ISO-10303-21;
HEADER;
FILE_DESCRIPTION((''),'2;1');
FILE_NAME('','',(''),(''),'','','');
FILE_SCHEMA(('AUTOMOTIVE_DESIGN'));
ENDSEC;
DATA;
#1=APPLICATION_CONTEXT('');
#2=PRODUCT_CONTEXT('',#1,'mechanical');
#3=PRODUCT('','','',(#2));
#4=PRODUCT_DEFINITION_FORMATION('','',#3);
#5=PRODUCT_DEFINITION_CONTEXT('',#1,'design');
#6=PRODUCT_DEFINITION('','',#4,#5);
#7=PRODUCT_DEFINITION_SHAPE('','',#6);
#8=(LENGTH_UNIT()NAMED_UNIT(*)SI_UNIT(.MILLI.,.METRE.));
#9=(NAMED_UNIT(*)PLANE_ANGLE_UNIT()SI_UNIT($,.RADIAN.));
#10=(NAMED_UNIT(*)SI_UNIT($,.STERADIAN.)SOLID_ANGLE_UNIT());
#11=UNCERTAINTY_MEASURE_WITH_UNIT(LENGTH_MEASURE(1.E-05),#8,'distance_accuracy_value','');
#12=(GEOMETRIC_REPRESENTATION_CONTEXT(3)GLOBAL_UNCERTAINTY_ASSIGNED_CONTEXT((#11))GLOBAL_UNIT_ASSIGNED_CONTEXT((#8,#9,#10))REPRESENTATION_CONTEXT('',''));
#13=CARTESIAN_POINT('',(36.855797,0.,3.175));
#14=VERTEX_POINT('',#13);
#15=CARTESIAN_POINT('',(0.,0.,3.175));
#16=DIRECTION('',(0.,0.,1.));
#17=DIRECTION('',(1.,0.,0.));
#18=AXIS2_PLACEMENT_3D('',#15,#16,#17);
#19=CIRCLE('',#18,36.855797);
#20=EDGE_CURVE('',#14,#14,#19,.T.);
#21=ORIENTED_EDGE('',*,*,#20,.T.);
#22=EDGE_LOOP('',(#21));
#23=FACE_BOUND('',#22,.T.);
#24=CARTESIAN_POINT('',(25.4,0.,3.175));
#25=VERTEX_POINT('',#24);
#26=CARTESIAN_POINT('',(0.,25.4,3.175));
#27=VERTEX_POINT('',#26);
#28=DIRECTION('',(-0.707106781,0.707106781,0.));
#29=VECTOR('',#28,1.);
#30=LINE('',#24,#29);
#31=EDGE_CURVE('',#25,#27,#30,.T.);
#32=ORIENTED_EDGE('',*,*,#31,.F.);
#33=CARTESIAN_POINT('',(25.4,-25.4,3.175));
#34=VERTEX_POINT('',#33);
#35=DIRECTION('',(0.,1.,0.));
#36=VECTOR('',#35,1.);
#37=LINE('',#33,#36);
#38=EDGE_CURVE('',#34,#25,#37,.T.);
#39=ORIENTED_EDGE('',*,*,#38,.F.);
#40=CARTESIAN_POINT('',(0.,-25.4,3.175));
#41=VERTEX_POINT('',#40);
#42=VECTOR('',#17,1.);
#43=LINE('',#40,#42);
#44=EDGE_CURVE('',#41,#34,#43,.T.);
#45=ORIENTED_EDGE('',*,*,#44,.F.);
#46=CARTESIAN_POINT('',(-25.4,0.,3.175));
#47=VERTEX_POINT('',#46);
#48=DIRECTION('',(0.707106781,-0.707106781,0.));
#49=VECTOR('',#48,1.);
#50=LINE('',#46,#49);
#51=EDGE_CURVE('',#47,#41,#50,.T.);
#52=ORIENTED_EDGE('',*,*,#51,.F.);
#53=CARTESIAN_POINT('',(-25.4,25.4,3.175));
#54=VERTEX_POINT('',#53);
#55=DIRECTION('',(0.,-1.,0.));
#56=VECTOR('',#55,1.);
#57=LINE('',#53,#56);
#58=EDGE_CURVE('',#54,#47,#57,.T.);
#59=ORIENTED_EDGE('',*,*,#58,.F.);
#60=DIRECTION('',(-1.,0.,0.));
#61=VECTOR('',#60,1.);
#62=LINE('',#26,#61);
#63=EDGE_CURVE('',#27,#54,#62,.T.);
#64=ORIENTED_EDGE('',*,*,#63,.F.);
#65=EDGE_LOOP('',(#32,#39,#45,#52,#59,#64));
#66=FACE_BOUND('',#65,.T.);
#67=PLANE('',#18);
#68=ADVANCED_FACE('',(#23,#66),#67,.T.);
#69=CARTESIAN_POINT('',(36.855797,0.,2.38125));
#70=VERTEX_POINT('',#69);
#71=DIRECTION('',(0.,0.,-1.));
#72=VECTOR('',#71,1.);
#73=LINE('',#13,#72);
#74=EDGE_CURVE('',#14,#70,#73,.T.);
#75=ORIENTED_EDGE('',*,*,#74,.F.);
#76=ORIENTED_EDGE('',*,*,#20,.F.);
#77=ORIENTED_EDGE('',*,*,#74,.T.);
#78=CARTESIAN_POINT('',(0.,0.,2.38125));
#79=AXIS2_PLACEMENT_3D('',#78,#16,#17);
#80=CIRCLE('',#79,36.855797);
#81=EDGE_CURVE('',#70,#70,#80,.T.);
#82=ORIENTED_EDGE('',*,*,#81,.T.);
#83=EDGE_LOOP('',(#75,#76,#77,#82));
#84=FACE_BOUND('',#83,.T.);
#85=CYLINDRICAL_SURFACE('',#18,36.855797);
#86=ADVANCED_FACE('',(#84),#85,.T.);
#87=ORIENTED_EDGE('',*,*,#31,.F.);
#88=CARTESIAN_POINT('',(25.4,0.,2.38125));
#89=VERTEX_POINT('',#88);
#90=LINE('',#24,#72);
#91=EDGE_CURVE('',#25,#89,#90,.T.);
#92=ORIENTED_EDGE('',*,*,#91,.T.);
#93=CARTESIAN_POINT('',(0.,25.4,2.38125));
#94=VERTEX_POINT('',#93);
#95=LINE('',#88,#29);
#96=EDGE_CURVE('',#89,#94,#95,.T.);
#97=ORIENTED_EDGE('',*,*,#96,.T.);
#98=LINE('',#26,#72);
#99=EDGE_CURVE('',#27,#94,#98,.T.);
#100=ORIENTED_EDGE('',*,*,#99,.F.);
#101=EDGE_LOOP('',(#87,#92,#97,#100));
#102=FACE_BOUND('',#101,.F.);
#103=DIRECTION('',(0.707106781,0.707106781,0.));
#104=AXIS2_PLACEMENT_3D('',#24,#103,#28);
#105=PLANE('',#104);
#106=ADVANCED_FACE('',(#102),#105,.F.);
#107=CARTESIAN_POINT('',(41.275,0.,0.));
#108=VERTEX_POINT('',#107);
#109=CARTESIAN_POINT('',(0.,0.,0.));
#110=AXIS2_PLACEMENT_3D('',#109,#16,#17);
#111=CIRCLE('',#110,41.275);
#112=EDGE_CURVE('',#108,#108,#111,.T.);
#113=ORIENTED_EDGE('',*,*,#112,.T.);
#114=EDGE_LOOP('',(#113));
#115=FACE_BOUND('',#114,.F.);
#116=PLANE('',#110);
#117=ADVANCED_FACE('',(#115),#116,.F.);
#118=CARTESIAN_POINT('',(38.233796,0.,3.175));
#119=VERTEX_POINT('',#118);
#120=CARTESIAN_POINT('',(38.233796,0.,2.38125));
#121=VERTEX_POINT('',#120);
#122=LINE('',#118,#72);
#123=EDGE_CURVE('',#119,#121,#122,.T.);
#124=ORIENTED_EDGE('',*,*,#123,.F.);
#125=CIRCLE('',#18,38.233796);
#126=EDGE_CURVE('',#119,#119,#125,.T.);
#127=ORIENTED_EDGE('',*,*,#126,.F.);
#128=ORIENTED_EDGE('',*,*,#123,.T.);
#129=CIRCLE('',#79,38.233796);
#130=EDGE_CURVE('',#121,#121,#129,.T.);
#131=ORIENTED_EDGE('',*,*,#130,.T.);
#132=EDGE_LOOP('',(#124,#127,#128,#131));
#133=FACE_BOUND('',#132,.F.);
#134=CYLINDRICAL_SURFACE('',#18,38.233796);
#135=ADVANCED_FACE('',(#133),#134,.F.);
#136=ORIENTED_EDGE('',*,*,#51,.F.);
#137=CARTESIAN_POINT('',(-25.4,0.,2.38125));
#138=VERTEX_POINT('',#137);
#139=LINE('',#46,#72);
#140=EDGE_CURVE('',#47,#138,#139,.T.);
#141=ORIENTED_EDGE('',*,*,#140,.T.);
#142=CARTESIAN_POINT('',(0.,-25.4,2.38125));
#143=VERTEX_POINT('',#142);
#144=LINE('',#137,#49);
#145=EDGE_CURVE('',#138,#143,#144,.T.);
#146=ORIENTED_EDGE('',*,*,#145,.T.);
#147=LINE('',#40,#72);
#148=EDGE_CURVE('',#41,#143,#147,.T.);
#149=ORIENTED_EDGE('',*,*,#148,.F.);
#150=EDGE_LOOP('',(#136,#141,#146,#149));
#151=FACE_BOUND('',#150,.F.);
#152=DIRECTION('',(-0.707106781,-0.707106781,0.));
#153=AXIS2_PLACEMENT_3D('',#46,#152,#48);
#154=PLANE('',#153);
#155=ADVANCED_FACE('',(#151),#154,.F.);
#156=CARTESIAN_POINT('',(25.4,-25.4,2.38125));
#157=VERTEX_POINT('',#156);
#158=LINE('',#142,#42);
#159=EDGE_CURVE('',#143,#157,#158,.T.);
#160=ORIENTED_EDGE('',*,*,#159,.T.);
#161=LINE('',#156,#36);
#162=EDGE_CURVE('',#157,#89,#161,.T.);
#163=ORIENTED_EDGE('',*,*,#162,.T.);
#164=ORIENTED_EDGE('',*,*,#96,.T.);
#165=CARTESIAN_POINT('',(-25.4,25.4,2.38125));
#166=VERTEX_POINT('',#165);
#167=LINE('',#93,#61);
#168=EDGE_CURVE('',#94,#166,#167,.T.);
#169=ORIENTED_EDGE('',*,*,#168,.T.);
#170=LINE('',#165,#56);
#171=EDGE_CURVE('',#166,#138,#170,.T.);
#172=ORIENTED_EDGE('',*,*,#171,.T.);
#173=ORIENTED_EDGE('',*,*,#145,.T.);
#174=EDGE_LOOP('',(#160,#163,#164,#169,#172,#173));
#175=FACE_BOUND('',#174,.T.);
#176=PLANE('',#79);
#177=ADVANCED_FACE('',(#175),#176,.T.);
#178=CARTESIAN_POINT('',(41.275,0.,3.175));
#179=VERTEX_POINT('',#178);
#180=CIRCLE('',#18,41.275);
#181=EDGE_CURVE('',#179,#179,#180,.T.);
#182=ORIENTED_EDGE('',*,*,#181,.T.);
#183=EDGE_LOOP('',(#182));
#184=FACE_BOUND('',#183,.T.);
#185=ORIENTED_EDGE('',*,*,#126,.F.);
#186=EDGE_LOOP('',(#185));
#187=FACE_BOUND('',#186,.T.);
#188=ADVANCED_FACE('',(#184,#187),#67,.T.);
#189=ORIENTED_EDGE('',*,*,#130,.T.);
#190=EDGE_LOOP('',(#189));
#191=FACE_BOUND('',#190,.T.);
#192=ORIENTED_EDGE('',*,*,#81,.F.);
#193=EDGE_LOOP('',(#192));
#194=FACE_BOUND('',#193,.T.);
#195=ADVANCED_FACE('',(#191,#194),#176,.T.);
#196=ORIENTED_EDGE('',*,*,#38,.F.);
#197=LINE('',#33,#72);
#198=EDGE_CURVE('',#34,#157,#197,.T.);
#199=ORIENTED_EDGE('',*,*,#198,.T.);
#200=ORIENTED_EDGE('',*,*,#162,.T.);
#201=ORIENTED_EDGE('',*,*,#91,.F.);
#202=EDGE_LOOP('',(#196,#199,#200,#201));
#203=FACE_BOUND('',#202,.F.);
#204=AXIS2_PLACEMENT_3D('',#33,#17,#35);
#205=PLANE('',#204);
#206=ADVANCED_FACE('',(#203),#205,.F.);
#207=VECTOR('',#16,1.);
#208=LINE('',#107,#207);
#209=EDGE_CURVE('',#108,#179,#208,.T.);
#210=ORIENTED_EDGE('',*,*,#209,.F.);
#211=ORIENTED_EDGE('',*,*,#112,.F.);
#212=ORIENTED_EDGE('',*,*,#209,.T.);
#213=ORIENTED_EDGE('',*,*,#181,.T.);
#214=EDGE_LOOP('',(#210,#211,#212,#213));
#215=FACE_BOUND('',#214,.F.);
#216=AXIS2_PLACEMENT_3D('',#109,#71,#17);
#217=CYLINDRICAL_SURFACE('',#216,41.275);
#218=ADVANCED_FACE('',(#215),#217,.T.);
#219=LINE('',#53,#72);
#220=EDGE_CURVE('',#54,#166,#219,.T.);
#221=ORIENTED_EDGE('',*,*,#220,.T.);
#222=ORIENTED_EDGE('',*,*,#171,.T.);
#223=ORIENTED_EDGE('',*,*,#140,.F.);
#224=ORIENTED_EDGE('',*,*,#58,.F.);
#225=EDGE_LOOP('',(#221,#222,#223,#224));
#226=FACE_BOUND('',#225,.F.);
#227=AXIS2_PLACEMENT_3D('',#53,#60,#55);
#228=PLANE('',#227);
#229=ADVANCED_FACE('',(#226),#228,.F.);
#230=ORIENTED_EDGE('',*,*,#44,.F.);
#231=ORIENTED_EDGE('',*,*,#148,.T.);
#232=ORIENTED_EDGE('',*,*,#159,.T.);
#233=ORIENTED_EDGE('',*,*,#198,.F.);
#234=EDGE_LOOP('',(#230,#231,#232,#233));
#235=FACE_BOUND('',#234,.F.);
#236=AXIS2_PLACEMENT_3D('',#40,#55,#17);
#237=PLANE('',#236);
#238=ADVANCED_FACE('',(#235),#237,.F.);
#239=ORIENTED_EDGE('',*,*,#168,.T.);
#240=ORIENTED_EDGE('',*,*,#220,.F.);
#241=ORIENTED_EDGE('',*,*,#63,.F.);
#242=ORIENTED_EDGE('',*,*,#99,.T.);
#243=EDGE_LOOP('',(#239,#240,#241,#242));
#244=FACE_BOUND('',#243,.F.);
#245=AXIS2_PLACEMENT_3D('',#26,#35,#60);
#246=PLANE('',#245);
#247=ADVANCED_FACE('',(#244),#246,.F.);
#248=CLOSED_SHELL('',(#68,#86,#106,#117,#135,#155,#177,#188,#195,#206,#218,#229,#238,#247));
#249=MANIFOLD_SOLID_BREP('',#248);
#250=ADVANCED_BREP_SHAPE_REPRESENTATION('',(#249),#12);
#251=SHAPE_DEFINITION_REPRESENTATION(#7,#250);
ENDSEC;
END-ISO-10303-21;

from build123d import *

# Parameters (mm, degrees)
F0_R     = 41.275
F1_DEPTH = 3.175
F2_R     = 38.2337964231
F2_R_2   = 36.8557965157
F3_DEPTH = 0.79375
F5_DEPTH = 0.79375


# Not quite as in the source:
# - a length typed as a fraction of an inch, garbled in the dataset ("3 / 203.2 mm" for 3/8 in), is restored


with BuildPart() as f1:
    # F0 (on Top) → F1 (new body)
    with BuildSketch(Plane.XY):
        Circle(F0_R)
    extrude(amount=F1_DEPTH)

    # F2 (on face) → F3 (cut)
    with BuildSketch(Plane.XY.offset(3.175)):
        Circle(F2_R)
        Circle(F2_R_2, mode=Mode.SUBTRACT)
    extrude(amount=-F3_DEPTH, mode=Mode.SUBTRACT)

    # F4 (on face) → F5 (cut)
    with BuildSketch(Plane.XY.offset(3.175)):
        Polygon((25.4, 0), (0, 25.4), (-25.4, 25.4), (-25.4, 0), (0, -25.4), (25.4, -25.4), align=None)
    extrude(amount=-F5_DEPTH, mode=Mode.SUBTRACT)


solid = f1.part
